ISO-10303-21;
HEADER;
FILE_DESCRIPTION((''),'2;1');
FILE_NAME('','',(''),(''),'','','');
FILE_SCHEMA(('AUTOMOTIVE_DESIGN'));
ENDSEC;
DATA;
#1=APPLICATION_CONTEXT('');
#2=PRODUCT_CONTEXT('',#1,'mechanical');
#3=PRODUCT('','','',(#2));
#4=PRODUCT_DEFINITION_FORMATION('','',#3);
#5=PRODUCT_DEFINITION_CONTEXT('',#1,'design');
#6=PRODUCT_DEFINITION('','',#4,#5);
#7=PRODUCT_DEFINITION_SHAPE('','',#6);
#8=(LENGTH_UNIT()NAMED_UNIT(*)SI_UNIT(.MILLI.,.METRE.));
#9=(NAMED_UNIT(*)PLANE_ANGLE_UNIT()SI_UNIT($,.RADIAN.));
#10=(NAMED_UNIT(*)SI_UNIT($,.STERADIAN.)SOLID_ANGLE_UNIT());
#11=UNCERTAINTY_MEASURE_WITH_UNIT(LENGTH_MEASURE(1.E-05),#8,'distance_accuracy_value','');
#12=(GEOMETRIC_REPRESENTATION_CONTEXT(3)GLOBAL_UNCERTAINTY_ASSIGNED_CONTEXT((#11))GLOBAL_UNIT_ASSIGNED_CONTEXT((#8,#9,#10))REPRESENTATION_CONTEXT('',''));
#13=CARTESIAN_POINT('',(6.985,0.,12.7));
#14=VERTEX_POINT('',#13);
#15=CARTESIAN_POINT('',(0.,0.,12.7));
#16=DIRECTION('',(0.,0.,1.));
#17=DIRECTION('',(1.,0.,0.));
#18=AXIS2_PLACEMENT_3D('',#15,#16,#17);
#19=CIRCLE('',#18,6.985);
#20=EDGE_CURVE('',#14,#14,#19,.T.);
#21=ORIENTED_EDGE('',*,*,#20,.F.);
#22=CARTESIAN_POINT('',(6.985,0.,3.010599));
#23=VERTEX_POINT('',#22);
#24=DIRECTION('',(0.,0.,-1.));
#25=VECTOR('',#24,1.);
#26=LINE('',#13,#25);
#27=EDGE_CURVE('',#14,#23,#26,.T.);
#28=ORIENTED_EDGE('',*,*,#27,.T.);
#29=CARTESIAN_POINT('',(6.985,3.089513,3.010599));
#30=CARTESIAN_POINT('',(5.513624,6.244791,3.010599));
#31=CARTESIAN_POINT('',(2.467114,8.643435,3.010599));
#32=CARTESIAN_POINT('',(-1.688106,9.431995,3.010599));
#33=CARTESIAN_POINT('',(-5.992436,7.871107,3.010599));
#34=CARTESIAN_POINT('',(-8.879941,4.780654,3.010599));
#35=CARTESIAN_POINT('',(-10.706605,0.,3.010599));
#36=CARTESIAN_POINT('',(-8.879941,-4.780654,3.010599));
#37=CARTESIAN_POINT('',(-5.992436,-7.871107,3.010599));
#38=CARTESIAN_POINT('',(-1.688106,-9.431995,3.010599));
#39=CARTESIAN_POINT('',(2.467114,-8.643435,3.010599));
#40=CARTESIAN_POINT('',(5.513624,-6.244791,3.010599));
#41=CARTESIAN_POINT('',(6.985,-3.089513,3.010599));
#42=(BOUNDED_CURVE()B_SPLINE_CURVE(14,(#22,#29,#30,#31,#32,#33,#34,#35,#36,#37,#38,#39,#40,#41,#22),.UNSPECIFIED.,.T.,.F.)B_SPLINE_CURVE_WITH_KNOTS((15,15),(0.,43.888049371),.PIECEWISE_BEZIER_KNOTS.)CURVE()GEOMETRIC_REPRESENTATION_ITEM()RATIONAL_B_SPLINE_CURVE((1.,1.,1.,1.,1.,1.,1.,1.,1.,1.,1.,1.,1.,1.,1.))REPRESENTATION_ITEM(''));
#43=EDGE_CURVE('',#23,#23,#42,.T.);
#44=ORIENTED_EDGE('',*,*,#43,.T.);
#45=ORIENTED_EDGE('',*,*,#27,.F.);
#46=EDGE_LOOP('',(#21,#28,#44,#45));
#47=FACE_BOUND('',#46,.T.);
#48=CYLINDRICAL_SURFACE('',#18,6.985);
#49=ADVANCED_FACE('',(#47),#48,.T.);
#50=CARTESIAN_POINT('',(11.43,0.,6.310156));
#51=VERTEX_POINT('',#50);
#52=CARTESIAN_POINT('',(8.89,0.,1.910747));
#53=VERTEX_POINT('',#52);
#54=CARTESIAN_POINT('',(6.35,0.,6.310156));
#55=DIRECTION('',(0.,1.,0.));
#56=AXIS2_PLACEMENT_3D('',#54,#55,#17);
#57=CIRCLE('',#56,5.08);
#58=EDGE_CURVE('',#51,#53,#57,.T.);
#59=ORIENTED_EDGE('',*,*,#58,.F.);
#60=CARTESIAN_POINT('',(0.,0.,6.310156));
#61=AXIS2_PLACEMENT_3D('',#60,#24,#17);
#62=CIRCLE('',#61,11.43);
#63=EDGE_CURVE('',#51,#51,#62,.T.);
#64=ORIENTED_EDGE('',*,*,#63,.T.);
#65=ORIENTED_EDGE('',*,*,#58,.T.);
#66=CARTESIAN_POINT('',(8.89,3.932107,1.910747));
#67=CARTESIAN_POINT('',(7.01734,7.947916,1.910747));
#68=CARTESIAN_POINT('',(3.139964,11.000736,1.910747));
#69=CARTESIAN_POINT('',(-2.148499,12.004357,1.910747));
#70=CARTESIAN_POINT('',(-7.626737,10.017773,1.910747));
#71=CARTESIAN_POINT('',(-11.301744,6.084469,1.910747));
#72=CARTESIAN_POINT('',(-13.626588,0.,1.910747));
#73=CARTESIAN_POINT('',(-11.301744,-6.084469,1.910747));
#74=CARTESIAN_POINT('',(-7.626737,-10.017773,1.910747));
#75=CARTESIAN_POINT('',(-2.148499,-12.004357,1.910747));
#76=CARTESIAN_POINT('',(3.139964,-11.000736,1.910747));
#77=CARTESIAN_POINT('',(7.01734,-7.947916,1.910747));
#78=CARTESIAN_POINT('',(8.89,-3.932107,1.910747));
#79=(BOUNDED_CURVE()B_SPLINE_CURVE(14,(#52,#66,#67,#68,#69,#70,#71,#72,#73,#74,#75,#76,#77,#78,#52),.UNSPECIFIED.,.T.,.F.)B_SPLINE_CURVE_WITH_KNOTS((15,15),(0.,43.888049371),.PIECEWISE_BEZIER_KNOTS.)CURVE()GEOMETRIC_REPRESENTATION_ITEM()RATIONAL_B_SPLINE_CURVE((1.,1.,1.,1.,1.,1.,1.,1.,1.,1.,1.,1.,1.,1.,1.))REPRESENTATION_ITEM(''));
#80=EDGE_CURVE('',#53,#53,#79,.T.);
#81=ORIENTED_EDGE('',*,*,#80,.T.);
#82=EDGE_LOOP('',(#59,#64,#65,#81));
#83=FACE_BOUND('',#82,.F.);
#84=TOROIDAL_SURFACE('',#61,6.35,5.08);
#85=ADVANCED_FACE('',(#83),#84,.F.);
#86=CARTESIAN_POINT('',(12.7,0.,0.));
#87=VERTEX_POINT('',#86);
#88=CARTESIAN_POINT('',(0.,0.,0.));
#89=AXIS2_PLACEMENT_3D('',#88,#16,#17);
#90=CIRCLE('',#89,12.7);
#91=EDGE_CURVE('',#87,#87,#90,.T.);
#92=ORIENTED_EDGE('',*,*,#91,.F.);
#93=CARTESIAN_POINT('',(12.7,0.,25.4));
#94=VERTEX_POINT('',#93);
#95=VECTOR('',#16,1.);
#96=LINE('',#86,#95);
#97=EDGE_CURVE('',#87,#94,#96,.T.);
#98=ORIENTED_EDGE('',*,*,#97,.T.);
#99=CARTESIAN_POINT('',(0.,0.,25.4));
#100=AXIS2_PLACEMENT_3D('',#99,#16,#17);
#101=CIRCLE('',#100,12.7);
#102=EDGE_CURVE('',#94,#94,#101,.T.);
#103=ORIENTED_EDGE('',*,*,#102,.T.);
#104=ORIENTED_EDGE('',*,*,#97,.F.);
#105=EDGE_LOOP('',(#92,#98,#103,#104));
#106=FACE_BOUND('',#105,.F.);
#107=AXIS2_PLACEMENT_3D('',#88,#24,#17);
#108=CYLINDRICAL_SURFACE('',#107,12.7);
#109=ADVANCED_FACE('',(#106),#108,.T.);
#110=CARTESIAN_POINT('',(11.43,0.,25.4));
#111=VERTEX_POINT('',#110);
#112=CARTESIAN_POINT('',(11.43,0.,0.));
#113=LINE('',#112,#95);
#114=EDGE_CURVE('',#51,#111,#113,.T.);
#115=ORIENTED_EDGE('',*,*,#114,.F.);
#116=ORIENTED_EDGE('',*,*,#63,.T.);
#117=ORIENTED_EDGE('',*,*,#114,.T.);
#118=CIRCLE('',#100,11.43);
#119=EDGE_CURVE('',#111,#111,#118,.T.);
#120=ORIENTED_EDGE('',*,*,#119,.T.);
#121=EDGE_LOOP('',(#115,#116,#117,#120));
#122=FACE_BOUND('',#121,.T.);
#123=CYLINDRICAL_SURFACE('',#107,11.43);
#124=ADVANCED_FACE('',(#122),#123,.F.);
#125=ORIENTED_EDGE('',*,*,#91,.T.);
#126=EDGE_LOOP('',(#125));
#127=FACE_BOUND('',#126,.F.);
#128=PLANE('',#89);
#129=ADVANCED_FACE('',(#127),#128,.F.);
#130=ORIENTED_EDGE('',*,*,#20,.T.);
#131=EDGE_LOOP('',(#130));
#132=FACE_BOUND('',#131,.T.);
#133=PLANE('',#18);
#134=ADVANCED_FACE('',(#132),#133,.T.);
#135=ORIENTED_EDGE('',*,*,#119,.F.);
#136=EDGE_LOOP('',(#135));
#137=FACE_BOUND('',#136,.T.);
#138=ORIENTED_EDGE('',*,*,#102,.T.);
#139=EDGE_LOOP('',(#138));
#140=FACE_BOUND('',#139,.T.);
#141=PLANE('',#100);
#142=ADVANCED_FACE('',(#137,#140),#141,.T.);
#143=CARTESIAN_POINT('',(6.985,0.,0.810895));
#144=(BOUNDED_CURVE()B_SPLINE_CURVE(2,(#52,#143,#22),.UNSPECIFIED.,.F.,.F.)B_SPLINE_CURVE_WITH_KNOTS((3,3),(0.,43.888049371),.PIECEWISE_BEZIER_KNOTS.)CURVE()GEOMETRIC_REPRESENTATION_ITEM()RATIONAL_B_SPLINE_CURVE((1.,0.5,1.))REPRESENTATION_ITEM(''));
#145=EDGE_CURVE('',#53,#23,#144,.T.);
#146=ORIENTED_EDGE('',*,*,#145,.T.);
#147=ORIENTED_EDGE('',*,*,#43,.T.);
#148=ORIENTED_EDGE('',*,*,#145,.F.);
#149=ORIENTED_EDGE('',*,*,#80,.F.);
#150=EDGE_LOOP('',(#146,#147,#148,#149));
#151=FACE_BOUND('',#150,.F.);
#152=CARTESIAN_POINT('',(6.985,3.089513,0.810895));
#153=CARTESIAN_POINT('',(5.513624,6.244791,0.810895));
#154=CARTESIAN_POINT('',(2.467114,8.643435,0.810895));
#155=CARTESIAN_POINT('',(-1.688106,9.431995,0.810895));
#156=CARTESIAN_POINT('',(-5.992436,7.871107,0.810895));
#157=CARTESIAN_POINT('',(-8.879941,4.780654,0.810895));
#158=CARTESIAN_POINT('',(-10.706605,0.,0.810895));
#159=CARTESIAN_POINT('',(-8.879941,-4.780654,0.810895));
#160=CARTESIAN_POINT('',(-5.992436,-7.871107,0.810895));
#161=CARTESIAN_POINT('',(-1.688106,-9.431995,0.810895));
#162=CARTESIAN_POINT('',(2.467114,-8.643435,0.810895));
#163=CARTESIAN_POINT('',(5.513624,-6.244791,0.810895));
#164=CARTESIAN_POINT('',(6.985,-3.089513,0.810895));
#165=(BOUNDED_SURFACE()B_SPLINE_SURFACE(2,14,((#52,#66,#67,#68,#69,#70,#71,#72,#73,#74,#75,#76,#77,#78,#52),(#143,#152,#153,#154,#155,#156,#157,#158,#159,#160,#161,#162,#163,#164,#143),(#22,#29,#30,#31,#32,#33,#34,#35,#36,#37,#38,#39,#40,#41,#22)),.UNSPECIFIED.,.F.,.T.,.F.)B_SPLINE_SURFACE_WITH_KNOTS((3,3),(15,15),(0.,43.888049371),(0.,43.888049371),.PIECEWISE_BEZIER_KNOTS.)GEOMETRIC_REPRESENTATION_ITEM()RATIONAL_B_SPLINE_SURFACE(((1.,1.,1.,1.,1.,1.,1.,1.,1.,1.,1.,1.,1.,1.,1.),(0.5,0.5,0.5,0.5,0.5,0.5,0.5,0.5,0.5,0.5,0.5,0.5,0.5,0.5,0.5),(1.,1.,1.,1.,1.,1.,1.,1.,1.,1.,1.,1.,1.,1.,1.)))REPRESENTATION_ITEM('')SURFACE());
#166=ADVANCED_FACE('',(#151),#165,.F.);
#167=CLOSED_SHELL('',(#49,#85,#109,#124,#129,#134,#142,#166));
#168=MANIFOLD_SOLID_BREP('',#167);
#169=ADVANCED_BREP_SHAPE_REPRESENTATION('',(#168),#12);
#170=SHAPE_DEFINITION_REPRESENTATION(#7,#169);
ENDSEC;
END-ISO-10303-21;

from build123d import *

# Parameters (mm, degrees)
F0_R     = 12.7
F1_DEPTH = 25.4
F2_T     = -1.27
F4_R     = 6.985
F5_DEPTH = 11.43
F7_R     = 1.27


# Not quite as in the source:
# - a fillet or chamfer that OpenCascade refuses, or shapes differently, is made with other operations: its cross-section is extruded or revolved along the edge and cut away or added


with BuildPart() as f1:
    # F0 (on Top) → F1 (new body)
    with BuildSketch(Plane.XY):
        Circle(F0_R)
    extrude(amount=F1_DEPTH)

    # F2
    f2_openings = [f1.faces().sort_by_distance(p)[0] for p in [
        (0, 0, 25.4),
    ]]
    offset(amount=F2_T, openings=f2_openings)

    # F4 (on offset) → F5 (join, through all)
    with BuildSketch(Plane.XY.offset(12.7)):
        Circle(F4_R)
    extrude(amount=-F5_DEPTH)

    # F6: fillet of radius 5.08 on 1 edges, made by hand

    # F6_s1 → F6_t2 (revolve)
    with BuildSketch(Plane.XZ):
        with BuildLine():
            ThreePointArc((11.43, 6.3101562476), (10.16, 2.9500520825), (6.985, 1.27))
            Line((6.985, 1.27), (11.43, 1.27))
            Line((11.43, 1.27), (11.43, 6.3101562476))
        make_face()
    revolve(axis=Axis((0, 0, 1.27), (0, 0, -1)))

    # F7
    f7_edges = [f1.edges().sort_by_distance(p)[0] for p in [
        (-6.985, 0, 1.27),
    ]]
    fillet(f7_edges, radius=F7_R)


solid = f1.part
